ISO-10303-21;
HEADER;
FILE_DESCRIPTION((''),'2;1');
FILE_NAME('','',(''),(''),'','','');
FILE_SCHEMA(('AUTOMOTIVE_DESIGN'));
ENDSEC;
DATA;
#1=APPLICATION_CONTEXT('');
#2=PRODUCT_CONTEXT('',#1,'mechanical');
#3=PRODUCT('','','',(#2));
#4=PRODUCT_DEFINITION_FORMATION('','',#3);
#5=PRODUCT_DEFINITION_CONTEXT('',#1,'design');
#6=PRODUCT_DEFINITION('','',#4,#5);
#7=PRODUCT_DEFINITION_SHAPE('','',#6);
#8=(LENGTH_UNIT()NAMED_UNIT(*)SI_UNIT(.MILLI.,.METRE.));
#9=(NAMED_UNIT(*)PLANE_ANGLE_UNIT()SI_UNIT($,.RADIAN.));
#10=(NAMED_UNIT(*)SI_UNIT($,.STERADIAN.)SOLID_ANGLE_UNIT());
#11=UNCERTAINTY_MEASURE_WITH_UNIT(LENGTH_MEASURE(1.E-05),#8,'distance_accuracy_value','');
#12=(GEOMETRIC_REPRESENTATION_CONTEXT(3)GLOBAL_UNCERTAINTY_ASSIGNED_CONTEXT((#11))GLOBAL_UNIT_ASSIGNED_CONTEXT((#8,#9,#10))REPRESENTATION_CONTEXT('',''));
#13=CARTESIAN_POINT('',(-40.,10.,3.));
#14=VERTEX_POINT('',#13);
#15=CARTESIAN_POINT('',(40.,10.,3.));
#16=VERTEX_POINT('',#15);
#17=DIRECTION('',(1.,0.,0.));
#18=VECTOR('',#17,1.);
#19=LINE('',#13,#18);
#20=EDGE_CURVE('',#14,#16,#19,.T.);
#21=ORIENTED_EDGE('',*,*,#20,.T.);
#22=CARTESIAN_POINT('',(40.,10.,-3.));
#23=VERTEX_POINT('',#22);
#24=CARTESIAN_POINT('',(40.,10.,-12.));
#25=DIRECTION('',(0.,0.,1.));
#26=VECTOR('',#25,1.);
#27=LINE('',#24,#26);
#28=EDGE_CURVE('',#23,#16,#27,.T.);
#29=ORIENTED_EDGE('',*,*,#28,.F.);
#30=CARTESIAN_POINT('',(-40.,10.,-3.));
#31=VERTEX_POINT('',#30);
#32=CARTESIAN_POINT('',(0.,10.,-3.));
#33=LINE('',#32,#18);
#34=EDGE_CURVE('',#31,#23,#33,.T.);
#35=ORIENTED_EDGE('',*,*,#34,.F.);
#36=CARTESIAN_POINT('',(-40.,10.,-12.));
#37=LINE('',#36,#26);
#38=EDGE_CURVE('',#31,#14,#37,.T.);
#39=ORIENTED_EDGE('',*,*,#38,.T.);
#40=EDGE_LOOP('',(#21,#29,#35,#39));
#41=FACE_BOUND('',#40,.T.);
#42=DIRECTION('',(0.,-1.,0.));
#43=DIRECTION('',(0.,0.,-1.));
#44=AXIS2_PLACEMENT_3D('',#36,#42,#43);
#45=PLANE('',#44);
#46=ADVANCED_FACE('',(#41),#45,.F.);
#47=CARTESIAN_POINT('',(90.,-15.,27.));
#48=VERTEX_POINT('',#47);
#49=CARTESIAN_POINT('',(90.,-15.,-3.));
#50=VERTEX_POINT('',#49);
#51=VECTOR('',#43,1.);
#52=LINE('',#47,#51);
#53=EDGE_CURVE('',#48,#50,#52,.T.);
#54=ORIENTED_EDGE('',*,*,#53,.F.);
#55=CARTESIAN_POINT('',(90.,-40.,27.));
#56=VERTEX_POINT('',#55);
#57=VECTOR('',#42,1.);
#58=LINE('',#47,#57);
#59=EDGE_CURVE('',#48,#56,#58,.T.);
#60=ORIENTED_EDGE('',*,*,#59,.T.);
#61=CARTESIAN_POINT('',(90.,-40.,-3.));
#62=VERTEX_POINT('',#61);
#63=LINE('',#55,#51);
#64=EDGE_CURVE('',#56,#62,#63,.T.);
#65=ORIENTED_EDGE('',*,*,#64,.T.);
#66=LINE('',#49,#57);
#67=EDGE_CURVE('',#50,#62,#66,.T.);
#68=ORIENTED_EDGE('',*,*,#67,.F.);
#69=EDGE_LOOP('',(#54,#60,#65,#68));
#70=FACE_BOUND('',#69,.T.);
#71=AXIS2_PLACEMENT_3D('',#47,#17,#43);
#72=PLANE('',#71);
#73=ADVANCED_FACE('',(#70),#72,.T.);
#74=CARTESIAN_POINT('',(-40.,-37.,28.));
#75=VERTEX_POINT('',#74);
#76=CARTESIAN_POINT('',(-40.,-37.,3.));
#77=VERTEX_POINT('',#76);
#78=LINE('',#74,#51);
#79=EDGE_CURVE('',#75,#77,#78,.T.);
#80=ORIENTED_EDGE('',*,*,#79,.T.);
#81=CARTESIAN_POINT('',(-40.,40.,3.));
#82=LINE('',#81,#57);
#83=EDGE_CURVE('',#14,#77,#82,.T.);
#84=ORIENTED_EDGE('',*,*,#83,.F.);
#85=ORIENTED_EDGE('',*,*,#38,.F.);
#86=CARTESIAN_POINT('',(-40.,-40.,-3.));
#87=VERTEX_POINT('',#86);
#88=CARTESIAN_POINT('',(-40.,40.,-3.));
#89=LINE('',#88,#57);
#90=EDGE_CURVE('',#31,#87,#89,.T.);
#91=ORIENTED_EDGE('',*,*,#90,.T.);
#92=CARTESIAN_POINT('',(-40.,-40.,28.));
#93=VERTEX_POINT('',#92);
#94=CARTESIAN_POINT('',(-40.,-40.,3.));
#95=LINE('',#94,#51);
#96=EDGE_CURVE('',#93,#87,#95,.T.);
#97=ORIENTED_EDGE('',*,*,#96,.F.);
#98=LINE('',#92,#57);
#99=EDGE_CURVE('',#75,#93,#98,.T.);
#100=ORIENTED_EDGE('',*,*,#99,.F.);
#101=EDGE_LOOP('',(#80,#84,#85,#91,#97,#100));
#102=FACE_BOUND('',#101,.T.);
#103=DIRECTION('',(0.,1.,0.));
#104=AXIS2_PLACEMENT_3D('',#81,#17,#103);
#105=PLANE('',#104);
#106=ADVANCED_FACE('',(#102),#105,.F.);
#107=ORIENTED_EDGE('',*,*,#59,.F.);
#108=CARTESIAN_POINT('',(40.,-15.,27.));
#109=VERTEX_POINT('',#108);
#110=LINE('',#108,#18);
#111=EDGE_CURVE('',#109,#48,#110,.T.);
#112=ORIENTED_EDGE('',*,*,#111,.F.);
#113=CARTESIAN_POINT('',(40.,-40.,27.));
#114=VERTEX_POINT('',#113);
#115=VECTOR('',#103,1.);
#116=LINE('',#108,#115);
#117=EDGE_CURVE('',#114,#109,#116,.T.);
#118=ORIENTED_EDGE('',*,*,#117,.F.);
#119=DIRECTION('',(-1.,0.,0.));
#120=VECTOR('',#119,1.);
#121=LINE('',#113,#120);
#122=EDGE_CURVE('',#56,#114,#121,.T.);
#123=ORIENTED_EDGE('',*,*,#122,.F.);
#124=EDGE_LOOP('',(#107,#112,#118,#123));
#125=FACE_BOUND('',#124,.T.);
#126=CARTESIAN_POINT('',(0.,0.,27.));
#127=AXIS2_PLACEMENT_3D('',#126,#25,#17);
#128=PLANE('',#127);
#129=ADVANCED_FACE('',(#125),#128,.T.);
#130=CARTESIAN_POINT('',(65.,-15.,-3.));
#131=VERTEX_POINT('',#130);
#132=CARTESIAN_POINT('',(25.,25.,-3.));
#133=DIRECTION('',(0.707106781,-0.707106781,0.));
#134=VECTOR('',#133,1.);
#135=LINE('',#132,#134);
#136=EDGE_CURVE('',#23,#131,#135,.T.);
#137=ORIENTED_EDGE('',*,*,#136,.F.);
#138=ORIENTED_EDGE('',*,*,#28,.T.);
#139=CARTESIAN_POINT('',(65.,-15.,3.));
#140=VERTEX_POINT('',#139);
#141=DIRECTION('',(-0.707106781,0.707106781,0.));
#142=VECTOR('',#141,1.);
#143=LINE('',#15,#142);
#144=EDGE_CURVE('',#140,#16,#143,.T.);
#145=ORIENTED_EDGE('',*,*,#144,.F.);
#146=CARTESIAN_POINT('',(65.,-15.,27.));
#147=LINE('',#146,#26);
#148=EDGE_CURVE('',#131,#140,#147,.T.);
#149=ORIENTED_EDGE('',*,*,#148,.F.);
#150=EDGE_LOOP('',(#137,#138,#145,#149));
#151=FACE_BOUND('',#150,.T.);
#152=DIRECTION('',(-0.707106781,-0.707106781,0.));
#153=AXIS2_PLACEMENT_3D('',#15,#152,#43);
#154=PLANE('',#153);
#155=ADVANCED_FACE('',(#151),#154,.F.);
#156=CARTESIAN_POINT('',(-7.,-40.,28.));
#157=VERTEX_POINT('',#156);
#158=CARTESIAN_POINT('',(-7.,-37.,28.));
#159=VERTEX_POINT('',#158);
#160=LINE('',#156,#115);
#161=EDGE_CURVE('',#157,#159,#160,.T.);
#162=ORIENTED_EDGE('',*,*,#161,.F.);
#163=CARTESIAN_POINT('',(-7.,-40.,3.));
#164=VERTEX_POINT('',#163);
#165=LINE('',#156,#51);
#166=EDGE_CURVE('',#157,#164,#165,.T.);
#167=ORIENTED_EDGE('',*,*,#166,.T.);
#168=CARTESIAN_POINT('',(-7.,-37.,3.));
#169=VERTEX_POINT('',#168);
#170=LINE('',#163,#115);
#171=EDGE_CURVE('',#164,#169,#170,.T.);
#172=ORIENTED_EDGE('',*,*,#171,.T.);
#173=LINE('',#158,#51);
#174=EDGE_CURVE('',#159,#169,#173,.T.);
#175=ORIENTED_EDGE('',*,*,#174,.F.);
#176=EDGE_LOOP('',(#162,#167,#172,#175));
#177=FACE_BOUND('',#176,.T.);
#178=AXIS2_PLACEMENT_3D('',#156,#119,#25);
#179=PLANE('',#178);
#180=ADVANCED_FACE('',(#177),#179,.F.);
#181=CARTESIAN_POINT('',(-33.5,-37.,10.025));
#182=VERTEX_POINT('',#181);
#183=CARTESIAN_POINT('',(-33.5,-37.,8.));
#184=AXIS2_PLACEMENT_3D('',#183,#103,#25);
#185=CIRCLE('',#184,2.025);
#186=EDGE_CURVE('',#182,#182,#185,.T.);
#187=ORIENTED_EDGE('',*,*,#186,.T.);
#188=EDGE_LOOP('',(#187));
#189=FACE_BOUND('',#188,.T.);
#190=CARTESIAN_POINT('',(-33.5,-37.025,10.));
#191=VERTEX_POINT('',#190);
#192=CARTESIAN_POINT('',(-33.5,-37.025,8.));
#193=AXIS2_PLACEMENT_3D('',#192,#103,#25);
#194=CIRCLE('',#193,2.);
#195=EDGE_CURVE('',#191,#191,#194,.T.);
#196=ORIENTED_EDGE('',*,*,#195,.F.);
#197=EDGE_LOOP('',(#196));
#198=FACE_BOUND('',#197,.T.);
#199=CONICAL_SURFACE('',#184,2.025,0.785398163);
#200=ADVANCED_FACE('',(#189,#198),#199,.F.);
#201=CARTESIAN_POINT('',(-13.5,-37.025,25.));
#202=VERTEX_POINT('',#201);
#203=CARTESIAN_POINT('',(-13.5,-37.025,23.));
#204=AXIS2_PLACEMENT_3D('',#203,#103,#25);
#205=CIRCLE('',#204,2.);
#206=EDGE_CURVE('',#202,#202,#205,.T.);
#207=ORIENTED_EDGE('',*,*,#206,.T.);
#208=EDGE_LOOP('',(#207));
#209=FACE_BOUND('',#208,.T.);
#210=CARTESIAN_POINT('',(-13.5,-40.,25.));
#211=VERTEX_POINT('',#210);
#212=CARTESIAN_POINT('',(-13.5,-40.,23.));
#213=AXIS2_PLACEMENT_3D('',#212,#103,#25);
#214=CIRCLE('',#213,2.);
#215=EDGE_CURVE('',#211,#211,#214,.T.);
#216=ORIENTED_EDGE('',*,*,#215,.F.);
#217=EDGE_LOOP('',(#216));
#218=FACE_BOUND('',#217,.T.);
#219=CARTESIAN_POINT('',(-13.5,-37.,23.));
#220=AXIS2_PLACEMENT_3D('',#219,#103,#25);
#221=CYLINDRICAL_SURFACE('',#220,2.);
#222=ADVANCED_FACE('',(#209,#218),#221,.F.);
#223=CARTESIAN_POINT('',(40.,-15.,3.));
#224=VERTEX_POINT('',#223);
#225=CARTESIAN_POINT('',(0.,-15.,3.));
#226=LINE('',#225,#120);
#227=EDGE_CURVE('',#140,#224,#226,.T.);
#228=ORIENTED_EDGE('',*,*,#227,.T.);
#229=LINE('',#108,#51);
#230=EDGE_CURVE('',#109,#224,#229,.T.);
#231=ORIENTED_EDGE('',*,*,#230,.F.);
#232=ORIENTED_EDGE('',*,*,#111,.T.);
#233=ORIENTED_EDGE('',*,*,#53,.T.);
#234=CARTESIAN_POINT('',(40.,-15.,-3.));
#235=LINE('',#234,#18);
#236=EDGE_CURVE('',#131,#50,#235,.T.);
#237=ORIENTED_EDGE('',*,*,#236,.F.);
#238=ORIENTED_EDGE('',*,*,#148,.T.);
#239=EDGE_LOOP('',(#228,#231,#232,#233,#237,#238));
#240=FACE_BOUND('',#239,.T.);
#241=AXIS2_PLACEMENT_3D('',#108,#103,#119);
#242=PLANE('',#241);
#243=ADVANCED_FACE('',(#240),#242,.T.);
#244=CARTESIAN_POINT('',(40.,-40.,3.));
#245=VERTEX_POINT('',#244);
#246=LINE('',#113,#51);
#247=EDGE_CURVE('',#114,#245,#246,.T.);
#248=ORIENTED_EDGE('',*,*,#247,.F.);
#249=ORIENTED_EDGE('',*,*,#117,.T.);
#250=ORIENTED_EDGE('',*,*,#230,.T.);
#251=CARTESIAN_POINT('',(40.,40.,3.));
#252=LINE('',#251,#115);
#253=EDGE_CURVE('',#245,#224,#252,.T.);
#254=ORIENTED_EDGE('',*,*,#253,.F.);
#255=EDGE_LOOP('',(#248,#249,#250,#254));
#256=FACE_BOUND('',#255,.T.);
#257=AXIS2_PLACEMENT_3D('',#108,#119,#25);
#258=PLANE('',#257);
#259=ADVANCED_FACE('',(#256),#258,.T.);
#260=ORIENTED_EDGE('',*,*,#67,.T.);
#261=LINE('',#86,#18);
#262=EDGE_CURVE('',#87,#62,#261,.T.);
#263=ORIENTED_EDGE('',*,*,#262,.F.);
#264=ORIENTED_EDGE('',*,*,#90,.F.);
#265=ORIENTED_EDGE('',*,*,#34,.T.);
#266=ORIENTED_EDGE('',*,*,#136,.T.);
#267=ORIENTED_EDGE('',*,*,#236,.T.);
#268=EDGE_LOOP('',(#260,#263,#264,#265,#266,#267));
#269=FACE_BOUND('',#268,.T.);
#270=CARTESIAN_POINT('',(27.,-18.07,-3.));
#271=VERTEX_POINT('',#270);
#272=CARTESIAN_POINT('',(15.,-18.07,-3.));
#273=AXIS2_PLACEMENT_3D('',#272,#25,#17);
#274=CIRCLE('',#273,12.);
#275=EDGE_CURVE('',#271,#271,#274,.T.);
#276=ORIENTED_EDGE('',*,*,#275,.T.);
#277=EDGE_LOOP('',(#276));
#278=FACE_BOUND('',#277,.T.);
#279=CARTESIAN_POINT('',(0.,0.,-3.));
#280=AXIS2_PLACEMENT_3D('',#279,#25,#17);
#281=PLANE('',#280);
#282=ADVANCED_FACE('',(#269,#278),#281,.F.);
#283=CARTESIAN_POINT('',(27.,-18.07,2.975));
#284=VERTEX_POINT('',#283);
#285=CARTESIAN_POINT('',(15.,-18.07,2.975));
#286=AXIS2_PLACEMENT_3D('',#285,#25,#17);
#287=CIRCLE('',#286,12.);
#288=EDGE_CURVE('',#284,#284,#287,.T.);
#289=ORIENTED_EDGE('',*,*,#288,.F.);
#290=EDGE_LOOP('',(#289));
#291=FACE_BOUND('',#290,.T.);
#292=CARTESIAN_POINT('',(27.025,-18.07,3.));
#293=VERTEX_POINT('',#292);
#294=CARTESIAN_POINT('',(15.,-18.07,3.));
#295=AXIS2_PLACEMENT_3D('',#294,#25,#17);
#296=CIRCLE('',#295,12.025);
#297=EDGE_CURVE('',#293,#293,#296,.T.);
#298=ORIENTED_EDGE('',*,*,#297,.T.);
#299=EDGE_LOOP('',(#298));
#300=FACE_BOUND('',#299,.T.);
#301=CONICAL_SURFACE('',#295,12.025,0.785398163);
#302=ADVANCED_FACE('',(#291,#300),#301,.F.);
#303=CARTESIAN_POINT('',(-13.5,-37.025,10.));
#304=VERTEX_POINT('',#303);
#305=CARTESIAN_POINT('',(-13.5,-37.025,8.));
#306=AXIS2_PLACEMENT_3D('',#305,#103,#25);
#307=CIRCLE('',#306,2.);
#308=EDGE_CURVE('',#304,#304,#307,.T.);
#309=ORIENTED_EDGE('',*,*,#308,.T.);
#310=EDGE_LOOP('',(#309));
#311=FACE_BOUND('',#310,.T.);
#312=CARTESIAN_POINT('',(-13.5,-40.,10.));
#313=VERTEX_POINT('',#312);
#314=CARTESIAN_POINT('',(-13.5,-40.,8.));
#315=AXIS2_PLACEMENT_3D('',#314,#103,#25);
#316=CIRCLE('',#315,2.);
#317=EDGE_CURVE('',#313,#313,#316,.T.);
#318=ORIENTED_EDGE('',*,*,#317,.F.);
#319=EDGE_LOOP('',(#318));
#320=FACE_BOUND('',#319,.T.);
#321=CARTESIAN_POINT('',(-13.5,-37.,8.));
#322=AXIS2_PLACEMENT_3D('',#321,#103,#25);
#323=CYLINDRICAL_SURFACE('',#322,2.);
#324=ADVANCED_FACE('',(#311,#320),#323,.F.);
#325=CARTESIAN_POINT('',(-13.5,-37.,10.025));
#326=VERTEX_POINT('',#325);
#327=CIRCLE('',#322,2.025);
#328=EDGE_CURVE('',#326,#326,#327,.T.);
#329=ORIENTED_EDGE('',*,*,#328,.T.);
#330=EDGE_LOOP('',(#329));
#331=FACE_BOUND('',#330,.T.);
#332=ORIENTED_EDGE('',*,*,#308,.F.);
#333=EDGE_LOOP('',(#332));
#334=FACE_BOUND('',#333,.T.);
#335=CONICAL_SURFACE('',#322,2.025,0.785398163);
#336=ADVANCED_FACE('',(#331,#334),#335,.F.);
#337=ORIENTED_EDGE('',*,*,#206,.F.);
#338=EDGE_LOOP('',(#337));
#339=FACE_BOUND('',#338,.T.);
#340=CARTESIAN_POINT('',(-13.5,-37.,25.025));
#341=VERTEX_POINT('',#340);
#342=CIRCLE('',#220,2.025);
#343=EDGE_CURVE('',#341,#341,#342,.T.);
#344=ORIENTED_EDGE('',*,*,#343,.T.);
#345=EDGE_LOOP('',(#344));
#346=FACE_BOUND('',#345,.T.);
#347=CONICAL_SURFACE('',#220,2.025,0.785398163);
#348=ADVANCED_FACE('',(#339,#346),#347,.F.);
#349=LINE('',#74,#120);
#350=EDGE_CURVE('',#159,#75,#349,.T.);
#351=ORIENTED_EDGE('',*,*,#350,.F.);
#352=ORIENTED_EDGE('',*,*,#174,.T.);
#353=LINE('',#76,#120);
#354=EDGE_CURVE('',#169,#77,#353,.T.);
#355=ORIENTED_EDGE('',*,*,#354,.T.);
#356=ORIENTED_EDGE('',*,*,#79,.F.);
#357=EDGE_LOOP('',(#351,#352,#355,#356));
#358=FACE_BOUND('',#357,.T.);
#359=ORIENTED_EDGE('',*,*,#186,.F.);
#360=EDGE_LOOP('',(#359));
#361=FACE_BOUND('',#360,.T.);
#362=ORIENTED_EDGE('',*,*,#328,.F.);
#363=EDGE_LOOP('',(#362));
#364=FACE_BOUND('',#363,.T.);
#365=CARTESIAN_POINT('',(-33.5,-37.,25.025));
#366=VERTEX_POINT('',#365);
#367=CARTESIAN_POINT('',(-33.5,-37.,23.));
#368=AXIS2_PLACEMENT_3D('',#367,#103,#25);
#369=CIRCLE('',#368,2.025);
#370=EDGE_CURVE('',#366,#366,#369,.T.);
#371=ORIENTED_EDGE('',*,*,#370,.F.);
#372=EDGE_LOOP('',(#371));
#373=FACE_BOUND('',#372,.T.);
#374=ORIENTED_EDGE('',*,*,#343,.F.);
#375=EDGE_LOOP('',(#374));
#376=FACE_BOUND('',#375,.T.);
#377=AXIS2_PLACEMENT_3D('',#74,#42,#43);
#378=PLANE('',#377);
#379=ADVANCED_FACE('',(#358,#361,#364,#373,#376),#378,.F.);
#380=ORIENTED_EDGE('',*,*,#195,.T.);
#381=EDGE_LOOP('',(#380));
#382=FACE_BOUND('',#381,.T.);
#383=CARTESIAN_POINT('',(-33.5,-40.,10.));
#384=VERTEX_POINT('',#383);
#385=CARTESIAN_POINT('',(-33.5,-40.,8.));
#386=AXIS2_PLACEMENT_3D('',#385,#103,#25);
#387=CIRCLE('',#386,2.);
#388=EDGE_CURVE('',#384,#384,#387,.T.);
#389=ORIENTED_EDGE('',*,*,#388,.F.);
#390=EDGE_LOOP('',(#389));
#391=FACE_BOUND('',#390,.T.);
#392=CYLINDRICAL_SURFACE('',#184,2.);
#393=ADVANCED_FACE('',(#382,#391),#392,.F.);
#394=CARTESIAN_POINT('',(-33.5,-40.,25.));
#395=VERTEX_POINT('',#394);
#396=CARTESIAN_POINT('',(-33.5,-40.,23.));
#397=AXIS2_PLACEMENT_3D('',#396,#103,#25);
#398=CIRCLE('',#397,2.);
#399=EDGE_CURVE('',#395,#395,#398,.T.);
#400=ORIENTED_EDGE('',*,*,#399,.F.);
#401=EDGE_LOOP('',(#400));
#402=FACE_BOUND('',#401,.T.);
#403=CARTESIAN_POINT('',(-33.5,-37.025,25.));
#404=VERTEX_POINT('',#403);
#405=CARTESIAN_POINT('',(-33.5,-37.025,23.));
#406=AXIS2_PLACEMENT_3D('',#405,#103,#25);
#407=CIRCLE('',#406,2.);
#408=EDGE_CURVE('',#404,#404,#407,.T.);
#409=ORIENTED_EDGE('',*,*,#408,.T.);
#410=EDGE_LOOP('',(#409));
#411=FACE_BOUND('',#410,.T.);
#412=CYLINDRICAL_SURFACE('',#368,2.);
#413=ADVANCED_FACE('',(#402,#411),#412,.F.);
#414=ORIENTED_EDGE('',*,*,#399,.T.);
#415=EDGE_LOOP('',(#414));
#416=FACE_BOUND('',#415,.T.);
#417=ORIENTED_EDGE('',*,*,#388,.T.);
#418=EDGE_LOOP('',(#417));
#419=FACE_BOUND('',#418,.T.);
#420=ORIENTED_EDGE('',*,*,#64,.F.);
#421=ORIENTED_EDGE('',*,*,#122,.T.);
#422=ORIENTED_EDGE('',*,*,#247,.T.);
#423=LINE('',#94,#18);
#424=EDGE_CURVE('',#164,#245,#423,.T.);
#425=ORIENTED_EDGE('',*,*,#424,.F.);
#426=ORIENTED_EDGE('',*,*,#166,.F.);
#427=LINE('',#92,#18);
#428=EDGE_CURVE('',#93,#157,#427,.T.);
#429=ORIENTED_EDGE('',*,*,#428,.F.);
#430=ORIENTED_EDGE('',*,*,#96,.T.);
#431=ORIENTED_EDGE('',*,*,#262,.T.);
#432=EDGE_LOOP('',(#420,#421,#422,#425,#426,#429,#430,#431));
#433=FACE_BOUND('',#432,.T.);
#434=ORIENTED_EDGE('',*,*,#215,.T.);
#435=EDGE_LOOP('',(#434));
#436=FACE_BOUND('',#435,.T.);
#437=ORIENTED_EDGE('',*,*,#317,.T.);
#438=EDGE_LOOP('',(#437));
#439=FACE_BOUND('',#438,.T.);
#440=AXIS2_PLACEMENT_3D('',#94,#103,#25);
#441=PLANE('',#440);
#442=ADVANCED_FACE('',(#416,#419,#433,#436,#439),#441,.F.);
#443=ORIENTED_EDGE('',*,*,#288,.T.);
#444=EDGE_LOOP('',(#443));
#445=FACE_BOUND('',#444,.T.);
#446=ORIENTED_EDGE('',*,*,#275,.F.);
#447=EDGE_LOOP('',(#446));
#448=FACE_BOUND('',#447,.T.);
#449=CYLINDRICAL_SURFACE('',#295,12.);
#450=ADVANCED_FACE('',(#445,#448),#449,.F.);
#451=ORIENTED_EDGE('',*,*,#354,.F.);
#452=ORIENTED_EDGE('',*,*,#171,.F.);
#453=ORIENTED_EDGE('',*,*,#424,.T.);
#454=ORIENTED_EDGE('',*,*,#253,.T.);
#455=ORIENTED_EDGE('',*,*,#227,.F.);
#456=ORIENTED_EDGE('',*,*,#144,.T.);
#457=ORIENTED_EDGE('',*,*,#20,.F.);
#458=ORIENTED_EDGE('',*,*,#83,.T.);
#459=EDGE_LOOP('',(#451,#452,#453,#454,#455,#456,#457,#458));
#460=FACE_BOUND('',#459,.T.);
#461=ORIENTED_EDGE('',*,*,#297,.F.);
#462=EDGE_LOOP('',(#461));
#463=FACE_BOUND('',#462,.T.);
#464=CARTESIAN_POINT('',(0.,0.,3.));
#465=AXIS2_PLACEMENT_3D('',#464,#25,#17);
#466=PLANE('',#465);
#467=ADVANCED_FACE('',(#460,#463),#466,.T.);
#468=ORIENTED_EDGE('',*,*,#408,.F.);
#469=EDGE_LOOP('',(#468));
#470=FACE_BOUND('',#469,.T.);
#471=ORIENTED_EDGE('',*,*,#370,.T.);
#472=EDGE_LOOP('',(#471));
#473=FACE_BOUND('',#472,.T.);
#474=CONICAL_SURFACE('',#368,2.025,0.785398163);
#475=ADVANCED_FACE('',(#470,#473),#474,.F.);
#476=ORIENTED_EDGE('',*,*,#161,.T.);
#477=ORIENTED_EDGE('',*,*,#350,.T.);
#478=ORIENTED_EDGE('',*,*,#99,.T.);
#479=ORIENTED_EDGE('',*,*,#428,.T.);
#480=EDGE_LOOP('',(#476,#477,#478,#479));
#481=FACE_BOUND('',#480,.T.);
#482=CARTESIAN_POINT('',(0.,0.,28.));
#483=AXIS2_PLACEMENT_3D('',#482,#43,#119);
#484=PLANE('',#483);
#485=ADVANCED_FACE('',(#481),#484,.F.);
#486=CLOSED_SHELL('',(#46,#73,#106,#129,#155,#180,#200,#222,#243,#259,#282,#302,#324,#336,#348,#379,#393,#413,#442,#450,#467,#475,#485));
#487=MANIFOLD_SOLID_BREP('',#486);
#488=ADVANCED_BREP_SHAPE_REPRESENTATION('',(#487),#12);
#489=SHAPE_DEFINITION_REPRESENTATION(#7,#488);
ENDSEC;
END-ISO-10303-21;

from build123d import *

# Parameters (mm, degrees)
SKETCH1_W                            = 80
SKETCH1_H                            = 80
BOSS_EXTRUDE1_DEPTH                  = 3
SKETCH2_W                            = 33
SKETCH2_H                            = 3
BOSS_EXTRUDE2_DEPTH                  = 25
F_4_0_4_DIAMETER_HOLE1_D             = 4
F_4_0_4_DIAMETER_HOLE1_DEPTH         = 8
F_4_0_4_DIAMETER_HOLE1_CSINK_D       = 4.05
F_4_0_4_DIAMETER_HOLE1_CSINK_ANGLE   = 90
F_4_0_4_DIAMETER_HOLE1_TIP           = 1.201721238
F_24_0_24_DIAMETER_HOLE1_D           = 24
F_24_0_24_DIAMETER_HOLE1_DEPTH       = 8
F_24_0_24_DIAMETER_HOLE1_CSINK_D     = 24.05
F_24_0_24_DIAMETER_HOLE1_CSINK_ANGLE = 90
F_24_0_24_DIAMETER_HOLE1_TIP         = 7.210327428
SKETCH9_W                            = 80
SKETCH9_H                            = 30
CUT_EXTRUDE1_DEPTH                   = 15
SKETCH10_W                           = 50
SKETCH10_H                           = 25
BOSS_EXTRUDE4_DEPTH                  = 30
CHAMFER2_SIZE                        = 25


with BuildPart() as part:
    # Sketch1 → Boss-Extrude1 (new, symmetric)
    with BuildSketch(Plane.XY):
        Rectangle(SKETCH1_W, SKETCH1_H)
    extrude(amount=BOSS_EXTRUDE1_DEPTH, both=True)

    # Sketch2 → Boss-Extrude2 (add)
    with BuildSketch(Plane.XY.offset(3)):
        with Locations((-23.5, -38.5)):
            Rectangle(SKETCH2_W, SKETCH2_H)
    extrude(amount=BOSS_EXTRUDE2_DEPTH)

    # Ø4.0 (4) Diameter Hole1
    with Locations(Plane(origin=(0, -37, 0), x_dir=(1, 0, 0), z_dir=(0, 1, 0))):
        with Locations((-33.5, -8), (-13.5, -8), (-13.5, -23), (-33.5, -23)):
            CounterSinkHole(F_4_0_4_DIAMETER_HOLE1_D / 2, F_4_0_4_DIAMETER_HOLE1_CSINK_D / 2, depth=F_4_0_4_DIAMETER_HOLE1_DEPTH, counter_sink_angle=F_4_0_4_DIAMETER_HOLE1_CSINK_ANGLE)
            with Locations((0, 0, -(F_4_0_4_DIAMETER_HOLE1_DEPTH + F_4_0_4_DIAMETER_HOLE1_TIP / 2))):  # 118° drill point
                Cone(0, F_4_0_4_DIAMETER_HOLE1_D / 2, F_4_0_4_DIAMETER_HOLE1_TIP, mode=Mode.SUBTRACT)

    # Ø24.0 (24) Diameter Hole1
    with Locations(Plane.XY.offset(3)):
        with Locations((15, -18.07)):
            CounterSinkHole(F_24_0_24_DIAMETER_HOLE1_D / 2, F_24_0_24_DIAMETER_HOLE1_CSINK_D / 2, depth=F_24_0_24_DIAMETER_HOLE1_DEPTH, counter_sink_angle=F_24_0_24_DIAMETER_HOLE1_CSINK_ANGLE)
            with Locations((0, 0, -(F_24_0_24_DIAMETER_HOLE1_DEPTH + F_24_0_24_DIAMETER_HOLE1_TIP / 2))):  # 118° drill point
                Cone(0, F_24_0_24_DIAMETER_HOLE1_D / 2, F_24_0_24_DIAMETER_HOLE1_TIP, mode=Mode.SUBTRACT)

    # Sketch9 → Cut-Extrude1 (cut)
    with BuildSketch(Plane.XY.offset(3)):
        with Locations((0, 25)):
            Rectangle(SKETCH9_W, SKETCH9_H)
    extrude(amount=-CUT_EXTRUDE1_DEPTH, mode=Mode.SUBTRACT)

    # Sketch10 → Boss-Extrude4 (add)
    with BuildSketch(Plane(origin=(0, 0, -3), x_dir=(-1, 0, 0), z_dir=(0, 0, -1))):
        with Locations((-65, -27.5)):
            Rectangle(SKETCH10_W, SKETCH10_H)
    extrude(amount=-BOSS_EXTRUDE4_DEPTH)

    # Chamfer2
    chamfer2_edges = [part.edges().sort_by_distance(p)[0] for p in [
        (40, -15, 0),
    ]]
    chamfer(chamfer2_edges, length=CHAMFER2_SIZE - 0.0001)  # a hair under: the kernel refuses the full size


solid = part.part
